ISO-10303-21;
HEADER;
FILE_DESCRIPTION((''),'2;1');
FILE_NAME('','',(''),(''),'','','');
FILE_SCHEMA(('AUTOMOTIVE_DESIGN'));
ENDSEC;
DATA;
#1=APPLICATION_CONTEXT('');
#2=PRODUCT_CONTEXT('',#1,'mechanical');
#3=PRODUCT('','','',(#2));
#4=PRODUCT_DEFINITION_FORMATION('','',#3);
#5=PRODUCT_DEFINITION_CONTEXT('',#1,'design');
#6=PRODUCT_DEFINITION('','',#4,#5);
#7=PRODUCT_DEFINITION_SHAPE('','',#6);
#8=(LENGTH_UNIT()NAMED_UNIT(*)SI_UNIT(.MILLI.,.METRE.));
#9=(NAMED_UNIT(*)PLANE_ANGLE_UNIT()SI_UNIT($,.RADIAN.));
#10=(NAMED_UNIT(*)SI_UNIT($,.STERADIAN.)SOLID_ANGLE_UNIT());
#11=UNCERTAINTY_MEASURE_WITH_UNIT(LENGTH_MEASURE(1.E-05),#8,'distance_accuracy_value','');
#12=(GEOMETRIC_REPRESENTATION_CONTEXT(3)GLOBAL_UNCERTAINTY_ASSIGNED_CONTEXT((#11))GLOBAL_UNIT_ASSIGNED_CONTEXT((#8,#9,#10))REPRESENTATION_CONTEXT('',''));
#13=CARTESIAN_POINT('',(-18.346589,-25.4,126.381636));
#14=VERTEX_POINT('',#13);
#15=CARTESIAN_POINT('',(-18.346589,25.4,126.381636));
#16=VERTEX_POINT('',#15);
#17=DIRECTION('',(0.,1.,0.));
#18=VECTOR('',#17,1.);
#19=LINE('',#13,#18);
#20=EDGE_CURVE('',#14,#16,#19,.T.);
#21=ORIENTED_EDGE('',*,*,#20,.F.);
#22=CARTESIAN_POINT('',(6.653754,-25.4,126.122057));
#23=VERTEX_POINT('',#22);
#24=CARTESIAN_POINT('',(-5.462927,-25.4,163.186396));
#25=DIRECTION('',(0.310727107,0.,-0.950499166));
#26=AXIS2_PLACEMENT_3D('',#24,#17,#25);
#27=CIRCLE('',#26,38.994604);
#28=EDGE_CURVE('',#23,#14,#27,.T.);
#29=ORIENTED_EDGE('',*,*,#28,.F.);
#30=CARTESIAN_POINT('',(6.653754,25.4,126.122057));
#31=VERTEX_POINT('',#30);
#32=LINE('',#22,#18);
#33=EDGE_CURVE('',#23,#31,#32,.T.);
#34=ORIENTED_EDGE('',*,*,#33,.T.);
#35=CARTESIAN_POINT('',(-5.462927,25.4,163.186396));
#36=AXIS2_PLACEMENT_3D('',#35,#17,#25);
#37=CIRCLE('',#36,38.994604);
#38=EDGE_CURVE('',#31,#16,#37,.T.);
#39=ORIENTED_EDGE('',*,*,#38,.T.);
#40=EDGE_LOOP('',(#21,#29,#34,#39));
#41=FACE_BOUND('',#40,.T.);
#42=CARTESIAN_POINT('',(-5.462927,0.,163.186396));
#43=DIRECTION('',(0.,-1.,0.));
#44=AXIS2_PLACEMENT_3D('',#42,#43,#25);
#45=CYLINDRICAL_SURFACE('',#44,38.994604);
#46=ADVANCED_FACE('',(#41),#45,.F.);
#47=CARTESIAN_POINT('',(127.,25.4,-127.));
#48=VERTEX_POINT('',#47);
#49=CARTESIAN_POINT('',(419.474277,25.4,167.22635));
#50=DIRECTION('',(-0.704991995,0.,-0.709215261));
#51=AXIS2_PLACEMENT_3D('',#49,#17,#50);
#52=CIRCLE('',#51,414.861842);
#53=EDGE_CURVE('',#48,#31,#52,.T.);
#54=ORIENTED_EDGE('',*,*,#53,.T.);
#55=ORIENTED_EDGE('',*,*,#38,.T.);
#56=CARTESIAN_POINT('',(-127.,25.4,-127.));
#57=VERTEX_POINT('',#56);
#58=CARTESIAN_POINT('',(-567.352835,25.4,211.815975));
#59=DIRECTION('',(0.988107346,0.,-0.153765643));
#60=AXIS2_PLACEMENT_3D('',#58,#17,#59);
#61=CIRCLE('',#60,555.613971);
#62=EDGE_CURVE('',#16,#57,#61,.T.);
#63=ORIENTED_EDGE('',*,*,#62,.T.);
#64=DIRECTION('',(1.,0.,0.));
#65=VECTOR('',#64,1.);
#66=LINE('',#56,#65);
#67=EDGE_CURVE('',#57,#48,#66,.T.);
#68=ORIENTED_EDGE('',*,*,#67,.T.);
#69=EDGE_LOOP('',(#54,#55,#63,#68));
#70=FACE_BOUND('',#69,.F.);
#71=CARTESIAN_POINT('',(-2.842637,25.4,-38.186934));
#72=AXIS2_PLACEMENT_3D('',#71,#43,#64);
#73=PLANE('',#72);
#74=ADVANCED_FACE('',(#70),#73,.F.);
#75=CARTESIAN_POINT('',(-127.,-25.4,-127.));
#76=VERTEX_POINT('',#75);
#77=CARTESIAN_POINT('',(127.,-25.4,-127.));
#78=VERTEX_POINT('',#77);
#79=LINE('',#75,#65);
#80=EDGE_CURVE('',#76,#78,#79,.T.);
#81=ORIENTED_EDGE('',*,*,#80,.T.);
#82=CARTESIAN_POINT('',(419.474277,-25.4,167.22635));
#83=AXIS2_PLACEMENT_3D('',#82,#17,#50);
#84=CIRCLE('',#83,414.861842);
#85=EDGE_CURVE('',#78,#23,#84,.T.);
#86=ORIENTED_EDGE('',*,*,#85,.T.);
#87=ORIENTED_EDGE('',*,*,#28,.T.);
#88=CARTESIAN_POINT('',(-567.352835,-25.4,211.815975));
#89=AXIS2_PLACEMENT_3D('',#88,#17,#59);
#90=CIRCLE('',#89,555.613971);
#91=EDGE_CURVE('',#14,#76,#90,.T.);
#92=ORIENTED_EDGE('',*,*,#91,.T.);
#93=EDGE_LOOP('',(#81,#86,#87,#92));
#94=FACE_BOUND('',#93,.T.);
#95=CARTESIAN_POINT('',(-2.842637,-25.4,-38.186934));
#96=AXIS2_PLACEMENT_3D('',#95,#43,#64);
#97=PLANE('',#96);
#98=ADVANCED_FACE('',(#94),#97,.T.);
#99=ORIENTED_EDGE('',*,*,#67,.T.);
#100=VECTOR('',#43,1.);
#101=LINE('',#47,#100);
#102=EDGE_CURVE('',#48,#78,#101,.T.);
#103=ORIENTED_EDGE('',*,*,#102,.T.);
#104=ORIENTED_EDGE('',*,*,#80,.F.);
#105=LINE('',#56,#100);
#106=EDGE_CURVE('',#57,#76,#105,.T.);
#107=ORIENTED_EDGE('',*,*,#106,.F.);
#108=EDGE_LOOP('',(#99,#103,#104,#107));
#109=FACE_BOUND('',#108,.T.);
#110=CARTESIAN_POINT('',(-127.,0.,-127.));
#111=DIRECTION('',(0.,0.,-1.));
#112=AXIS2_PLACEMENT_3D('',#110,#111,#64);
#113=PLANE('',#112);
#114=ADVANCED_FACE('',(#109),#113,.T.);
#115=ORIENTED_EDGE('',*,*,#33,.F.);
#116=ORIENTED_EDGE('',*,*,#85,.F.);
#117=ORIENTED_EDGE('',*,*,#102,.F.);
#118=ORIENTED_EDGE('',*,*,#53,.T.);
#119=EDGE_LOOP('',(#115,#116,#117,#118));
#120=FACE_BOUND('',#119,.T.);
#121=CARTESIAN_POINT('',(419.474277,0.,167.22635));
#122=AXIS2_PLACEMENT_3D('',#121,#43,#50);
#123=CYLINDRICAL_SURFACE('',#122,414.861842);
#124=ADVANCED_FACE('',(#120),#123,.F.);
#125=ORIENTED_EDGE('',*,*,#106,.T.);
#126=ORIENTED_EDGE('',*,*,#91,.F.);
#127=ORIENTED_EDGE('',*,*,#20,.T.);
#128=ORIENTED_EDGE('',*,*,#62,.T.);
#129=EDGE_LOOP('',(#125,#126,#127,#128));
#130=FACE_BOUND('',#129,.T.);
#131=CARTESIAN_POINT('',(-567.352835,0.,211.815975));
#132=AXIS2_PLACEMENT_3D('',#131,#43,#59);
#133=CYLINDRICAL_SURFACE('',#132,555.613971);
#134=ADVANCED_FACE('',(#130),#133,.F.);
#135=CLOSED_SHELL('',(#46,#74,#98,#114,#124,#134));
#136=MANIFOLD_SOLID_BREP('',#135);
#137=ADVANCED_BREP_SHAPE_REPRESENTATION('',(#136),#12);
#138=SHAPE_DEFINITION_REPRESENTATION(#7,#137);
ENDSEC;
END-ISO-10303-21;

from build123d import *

# Parameters (mm, degrees)
F1_DEPTH = 25.4
F2_DEPTH = 25.4


# Not quite as in the source:
# - a feature names something its author has since deleted; it is built from what else it names


with BuildPart() as f1:
    # F0 (on Front) → F1 (new body)
    with BuildSketch(Plane.XZ):
        with BuildLine():
            ThreePointArc((-18.3465890586, 126.3816356659), (-56.7077419166, -7.1554231915), (-127, -127))
            Line((-127, -127), (127, -127))
            ThreePointArc((127, -127), (44.8039114144, -10.9097348511), (6.6537535749, 126.1220574379))
            ThreePointArc((6.6537535749, 126.1220574379), (-5.8677854381, 124.1938938088), (-18.3465890586, 126.3816356659))
        make_face()
    extrude(amount=F1_DEPTH)

    # F0 (on Front) + F1_face (on face) → F2 (join)
    with BuildSketch(Plane.XZ):
        with BuildLine():
            ThreePointArc((-18.3465890586, 126.3816356659), (-56.7077419166, -7.1554231915), (-127, -127))
            Line((-127, -127), (127, -127))
            ThreePointArc((127, -127), (44.8039114144, -10.9097348511), (6.6537535749, 126.1220574379))
            ThreePointArc((6.6537535749, 126.1220574379), (-5.8677854381, 124.1938938088), (-18.3465890586, 126.3816356659))
        make_face()
    with BuildSketch(Plane(origin=(-4.6947353849, -25.4, -44.0067294457), x_dir=(1, 0, 0), z_dir=(0, -1, 0))):
        with BuildLine():
            ThreePointArc((131.6947353849, -82.9932705543), (49.4986467993, 33.0969945946), (11.3484889598, 170.1287868836))
            ThreePointArc((11.3484889598, 170.1287868836), (-1.1730500532, 168.2006232545), (-13.6518536737, 170.3883651116))
            ThreePointArc((-13.6518536737, 170.3883651116), (-52.0130065317, 36.8513062542), (-122.3052646151, -82.9932705543))
            Line((-122.3052646151, -82.9932705543), (131.6947353849, -82.9932705543))
        make_face()
    extrude(amount=-F2_DEPTH)


solid = f1.part
